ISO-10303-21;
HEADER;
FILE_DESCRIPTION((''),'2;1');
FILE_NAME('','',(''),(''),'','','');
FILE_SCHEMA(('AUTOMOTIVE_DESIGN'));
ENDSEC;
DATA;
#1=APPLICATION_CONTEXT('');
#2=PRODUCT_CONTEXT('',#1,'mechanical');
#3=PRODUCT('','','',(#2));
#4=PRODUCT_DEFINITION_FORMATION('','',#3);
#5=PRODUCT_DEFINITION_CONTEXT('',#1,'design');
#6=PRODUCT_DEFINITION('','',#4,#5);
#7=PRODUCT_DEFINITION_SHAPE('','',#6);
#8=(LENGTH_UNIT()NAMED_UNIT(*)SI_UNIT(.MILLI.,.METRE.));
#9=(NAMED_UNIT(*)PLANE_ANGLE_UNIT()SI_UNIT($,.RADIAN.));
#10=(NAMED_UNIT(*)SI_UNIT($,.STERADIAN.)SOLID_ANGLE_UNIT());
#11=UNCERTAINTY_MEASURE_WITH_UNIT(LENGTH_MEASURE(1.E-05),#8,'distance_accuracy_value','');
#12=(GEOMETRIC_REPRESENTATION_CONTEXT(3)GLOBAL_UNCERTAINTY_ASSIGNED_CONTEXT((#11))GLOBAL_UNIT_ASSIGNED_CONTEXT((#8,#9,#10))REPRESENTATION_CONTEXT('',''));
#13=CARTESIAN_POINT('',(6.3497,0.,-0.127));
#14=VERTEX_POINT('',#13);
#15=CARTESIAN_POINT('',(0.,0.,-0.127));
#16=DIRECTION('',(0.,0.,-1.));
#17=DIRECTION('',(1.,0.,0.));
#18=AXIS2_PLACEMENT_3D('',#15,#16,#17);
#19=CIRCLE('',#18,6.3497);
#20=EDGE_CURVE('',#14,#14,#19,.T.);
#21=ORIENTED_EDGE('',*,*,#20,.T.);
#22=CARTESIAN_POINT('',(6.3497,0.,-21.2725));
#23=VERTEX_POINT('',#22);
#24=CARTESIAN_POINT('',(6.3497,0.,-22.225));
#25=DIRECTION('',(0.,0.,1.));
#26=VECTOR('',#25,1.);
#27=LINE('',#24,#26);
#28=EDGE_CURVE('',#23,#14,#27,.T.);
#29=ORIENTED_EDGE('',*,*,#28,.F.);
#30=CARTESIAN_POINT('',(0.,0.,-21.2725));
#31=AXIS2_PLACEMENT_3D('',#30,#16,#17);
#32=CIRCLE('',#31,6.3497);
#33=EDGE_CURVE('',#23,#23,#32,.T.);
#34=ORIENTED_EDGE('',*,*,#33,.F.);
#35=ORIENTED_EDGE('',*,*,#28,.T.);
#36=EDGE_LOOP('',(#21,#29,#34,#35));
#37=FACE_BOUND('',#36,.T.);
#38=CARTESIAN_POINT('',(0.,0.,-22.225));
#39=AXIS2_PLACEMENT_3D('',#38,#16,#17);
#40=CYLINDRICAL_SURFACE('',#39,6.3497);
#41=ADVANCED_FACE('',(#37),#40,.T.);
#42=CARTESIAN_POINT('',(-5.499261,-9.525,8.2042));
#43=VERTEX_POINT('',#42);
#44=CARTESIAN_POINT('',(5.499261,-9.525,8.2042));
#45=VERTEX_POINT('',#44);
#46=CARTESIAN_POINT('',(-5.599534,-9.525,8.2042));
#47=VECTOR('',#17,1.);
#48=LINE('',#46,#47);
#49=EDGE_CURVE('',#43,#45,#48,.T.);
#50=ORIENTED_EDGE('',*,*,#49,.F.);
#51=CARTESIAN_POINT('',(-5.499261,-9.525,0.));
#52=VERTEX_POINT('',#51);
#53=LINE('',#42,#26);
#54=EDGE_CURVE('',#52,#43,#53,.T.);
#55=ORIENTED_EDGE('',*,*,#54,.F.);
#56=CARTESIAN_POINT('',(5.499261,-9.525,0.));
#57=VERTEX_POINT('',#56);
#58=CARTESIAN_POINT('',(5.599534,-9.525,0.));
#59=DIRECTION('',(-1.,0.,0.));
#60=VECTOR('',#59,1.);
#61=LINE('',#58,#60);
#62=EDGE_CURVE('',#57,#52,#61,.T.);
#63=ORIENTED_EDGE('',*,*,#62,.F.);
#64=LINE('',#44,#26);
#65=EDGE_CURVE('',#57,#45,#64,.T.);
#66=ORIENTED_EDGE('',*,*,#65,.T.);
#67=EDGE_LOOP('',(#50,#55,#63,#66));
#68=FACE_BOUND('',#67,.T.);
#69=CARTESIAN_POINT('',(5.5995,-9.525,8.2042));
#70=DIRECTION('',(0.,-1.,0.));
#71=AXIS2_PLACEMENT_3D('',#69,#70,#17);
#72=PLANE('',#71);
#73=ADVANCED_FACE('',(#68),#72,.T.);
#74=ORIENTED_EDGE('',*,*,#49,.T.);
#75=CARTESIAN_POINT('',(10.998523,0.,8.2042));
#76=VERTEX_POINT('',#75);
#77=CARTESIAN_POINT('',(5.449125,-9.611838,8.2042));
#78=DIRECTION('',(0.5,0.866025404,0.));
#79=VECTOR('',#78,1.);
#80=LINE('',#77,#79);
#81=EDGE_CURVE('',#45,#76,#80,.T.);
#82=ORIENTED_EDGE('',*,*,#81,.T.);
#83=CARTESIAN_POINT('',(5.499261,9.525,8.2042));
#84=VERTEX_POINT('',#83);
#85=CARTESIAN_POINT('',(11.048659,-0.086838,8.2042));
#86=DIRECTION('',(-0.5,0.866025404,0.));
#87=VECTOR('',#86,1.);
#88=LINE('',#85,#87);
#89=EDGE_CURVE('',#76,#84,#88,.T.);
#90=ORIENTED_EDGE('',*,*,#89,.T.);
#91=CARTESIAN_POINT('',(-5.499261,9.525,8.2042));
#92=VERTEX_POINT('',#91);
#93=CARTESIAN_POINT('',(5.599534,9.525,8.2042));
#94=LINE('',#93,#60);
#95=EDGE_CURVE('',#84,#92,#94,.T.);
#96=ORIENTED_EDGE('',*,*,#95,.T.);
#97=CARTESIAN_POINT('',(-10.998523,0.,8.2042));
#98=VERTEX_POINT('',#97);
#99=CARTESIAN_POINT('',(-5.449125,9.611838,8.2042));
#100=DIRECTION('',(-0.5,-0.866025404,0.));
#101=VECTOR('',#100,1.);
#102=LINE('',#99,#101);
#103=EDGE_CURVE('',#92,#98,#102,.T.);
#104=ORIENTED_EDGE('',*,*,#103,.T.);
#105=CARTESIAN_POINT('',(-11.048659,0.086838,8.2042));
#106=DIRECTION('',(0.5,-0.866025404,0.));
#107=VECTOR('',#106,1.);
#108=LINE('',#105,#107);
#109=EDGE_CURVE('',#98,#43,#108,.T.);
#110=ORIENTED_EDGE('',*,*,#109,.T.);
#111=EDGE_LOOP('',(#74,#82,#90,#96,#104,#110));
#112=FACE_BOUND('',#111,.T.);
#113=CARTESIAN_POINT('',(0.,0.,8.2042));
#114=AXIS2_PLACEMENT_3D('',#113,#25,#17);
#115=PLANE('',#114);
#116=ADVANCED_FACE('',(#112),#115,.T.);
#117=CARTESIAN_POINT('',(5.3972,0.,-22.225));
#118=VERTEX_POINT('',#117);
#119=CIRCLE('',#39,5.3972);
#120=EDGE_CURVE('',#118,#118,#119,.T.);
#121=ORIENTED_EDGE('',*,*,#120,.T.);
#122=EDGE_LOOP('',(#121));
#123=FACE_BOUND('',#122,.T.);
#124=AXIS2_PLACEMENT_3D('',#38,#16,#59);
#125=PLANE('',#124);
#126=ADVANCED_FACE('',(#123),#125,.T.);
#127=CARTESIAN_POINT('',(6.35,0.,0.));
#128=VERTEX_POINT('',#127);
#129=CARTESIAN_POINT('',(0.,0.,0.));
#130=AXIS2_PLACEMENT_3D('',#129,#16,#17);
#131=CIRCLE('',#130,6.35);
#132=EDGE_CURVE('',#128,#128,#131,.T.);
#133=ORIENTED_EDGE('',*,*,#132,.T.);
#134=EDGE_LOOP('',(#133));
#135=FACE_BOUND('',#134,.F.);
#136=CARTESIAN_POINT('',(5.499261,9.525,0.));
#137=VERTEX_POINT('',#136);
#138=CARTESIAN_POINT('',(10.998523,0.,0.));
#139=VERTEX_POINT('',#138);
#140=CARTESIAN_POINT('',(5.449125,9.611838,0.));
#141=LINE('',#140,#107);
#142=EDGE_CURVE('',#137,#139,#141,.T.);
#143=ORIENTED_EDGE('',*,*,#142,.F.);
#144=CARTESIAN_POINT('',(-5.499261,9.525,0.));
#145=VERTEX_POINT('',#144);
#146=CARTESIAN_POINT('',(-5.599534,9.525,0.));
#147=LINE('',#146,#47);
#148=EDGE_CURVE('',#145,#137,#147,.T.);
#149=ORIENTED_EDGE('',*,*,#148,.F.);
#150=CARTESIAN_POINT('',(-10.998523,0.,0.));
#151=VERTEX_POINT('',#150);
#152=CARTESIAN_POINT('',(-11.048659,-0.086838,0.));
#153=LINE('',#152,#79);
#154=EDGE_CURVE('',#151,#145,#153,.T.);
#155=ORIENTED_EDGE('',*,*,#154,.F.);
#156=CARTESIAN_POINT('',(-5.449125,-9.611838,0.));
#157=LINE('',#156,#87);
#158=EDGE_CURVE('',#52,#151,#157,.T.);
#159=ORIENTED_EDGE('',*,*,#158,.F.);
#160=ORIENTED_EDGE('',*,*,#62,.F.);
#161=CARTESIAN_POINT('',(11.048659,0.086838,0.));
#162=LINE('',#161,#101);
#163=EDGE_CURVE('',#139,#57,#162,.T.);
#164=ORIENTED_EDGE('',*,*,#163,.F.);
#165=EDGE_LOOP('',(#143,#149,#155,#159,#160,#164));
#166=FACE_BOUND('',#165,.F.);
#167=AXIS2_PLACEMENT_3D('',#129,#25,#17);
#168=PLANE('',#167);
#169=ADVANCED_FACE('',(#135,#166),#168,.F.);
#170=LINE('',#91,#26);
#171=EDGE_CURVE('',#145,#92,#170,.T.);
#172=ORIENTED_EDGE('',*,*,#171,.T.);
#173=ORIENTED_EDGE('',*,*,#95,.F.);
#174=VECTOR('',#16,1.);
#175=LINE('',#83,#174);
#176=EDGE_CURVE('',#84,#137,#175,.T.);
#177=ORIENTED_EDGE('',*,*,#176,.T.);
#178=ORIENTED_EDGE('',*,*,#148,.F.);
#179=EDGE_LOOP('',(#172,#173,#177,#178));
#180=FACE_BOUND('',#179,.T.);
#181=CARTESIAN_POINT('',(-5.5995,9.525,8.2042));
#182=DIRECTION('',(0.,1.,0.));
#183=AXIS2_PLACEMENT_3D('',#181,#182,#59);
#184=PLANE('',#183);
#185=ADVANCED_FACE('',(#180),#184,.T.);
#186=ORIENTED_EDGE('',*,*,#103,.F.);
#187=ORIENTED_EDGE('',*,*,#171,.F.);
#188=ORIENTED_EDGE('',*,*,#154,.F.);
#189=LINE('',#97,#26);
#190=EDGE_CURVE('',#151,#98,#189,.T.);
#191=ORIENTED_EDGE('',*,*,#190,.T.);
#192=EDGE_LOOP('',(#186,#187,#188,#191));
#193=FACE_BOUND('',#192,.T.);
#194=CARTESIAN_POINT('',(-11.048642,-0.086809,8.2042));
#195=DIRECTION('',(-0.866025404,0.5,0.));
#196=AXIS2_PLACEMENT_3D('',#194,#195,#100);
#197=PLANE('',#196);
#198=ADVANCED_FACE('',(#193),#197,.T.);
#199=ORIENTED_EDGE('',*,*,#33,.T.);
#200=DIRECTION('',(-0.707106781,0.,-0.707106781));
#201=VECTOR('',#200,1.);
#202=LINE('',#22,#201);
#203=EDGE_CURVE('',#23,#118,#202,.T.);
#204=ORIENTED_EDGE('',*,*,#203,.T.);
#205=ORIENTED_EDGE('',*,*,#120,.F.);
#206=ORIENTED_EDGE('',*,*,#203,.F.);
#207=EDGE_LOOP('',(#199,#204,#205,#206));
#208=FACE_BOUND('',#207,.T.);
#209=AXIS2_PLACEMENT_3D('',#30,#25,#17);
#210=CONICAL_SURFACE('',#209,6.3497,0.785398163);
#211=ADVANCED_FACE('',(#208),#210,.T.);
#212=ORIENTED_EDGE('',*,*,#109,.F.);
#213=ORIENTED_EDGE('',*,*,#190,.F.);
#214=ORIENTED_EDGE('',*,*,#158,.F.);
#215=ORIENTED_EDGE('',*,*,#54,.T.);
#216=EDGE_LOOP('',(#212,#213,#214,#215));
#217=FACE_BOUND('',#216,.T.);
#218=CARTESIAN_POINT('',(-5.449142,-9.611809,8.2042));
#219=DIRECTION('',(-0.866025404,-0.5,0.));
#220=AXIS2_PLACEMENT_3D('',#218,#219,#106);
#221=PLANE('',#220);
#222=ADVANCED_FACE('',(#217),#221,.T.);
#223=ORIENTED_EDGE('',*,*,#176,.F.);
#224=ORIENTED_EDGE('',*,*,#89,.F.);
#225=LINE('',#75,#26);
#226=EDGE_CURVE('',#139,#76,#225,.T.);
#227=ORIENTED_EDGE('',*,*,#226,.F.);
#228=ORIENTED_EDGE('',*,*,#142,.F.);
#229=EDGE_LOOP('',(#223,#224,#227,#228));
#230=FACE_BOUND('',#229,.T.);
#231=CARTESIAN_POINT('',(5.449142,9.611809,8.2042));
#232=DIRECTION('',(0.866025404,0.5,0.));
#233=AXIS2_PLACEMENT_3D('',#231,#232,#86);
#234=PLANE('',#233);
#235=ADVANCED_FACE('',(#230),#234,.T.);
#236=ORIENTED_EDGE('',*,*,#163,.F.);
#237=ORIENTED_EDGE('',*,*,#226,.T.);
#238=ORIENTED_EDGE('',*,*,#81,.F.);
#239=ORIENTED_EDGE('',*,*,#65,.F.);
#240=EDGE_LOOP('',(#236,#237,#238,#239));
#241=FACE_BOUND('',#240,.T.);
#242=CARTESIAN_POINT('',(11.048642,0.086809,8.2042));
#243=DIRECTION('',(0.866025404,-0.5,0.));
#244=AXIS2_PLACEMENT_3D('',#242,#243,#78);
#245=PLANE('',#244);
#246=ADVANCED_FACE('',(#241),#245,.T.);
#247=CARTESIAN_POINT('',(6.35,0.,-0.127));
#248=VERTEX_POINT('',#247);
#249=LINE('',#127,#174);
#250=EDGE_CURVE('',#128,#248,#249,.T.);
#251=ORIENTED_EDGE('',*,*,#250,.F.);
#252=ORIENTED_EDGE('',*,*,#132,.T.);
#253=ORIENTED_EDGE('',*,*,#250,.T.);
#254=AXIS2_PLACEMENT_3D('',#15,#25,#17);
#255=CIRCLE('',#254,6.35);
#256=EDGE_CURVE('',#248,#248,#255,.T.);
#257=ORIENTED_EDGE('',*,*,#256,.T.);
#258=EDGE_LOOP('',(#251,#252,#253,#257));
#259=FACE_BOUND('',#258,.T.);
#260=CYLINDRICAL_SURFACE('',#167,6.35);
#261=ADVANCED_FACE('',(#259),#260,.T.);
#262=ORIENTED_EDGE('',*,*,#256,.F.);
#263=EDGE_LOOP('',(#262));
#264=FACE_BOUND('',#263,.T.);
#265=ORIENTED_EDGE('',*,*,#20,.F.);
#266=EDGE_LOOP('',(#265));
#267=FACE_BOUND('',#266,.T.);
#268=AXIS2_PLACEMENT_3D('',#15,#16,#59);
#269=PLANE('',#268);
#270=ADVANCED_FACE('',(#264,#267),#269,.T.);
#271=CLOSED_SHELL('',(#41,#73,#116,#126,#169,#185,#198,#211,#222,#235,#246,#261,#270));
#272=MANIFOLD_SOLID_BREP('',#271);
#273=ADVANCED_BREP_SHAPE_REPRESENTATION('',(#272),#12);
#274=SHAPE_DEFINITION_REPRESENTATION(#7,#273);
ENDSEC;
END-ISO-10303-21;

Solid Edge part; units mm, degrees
sketch "Sketch1" plane through (0, 0, 0) normal (0, 0, 1) x (1, 0, 0)
  circle A0 centre (0, 0) radius 11.049
  dimension "D1" = 22.098
extrude "Protrusion1" add sketch "Sketch1" along normal blind 8.2042
sketch "Sketch2" plane through (0, 0, 0) normal (0, 0, -1) x (1, 0, 0)
  circle A0 centre (0, 0) radius 6.35
extrude "Protrusion2" add sketch "Sketch2" along normal blind 22.225
sketch "Sketch3" plane through (0, 0, -22.225) normal (0, 0, -1) x (1, 0, 0)
  circle A0 centre (0, 0) radius 6.3497
extrude "Cutout1" cut sketch "Sketch3" against normal blind 22.098 flip side to cut
chamfer "Chamfer_1" distance 0.9525 angle 45 1 edges at (-6.3497, 0, -22.225)
sketch "Sketch4" plane through (0, 0, 8.2042) normal (0, 0, 1) x (1, 0, 0)
  line L0 (-5.5995, 9.525) -> (5.5995, 9.525)
  dimension "D1" = 19.05
extrude "Cutout2" cut sketch "Sketch4" against normal up to next material side at (0, 9.575, 8.2042)
pattern_circular "Pattern1" count 6 over 360 about axis through (0, 0, 8.2042) along (0, 0, 1) of "Cutout2"
properties part number "24100162"
